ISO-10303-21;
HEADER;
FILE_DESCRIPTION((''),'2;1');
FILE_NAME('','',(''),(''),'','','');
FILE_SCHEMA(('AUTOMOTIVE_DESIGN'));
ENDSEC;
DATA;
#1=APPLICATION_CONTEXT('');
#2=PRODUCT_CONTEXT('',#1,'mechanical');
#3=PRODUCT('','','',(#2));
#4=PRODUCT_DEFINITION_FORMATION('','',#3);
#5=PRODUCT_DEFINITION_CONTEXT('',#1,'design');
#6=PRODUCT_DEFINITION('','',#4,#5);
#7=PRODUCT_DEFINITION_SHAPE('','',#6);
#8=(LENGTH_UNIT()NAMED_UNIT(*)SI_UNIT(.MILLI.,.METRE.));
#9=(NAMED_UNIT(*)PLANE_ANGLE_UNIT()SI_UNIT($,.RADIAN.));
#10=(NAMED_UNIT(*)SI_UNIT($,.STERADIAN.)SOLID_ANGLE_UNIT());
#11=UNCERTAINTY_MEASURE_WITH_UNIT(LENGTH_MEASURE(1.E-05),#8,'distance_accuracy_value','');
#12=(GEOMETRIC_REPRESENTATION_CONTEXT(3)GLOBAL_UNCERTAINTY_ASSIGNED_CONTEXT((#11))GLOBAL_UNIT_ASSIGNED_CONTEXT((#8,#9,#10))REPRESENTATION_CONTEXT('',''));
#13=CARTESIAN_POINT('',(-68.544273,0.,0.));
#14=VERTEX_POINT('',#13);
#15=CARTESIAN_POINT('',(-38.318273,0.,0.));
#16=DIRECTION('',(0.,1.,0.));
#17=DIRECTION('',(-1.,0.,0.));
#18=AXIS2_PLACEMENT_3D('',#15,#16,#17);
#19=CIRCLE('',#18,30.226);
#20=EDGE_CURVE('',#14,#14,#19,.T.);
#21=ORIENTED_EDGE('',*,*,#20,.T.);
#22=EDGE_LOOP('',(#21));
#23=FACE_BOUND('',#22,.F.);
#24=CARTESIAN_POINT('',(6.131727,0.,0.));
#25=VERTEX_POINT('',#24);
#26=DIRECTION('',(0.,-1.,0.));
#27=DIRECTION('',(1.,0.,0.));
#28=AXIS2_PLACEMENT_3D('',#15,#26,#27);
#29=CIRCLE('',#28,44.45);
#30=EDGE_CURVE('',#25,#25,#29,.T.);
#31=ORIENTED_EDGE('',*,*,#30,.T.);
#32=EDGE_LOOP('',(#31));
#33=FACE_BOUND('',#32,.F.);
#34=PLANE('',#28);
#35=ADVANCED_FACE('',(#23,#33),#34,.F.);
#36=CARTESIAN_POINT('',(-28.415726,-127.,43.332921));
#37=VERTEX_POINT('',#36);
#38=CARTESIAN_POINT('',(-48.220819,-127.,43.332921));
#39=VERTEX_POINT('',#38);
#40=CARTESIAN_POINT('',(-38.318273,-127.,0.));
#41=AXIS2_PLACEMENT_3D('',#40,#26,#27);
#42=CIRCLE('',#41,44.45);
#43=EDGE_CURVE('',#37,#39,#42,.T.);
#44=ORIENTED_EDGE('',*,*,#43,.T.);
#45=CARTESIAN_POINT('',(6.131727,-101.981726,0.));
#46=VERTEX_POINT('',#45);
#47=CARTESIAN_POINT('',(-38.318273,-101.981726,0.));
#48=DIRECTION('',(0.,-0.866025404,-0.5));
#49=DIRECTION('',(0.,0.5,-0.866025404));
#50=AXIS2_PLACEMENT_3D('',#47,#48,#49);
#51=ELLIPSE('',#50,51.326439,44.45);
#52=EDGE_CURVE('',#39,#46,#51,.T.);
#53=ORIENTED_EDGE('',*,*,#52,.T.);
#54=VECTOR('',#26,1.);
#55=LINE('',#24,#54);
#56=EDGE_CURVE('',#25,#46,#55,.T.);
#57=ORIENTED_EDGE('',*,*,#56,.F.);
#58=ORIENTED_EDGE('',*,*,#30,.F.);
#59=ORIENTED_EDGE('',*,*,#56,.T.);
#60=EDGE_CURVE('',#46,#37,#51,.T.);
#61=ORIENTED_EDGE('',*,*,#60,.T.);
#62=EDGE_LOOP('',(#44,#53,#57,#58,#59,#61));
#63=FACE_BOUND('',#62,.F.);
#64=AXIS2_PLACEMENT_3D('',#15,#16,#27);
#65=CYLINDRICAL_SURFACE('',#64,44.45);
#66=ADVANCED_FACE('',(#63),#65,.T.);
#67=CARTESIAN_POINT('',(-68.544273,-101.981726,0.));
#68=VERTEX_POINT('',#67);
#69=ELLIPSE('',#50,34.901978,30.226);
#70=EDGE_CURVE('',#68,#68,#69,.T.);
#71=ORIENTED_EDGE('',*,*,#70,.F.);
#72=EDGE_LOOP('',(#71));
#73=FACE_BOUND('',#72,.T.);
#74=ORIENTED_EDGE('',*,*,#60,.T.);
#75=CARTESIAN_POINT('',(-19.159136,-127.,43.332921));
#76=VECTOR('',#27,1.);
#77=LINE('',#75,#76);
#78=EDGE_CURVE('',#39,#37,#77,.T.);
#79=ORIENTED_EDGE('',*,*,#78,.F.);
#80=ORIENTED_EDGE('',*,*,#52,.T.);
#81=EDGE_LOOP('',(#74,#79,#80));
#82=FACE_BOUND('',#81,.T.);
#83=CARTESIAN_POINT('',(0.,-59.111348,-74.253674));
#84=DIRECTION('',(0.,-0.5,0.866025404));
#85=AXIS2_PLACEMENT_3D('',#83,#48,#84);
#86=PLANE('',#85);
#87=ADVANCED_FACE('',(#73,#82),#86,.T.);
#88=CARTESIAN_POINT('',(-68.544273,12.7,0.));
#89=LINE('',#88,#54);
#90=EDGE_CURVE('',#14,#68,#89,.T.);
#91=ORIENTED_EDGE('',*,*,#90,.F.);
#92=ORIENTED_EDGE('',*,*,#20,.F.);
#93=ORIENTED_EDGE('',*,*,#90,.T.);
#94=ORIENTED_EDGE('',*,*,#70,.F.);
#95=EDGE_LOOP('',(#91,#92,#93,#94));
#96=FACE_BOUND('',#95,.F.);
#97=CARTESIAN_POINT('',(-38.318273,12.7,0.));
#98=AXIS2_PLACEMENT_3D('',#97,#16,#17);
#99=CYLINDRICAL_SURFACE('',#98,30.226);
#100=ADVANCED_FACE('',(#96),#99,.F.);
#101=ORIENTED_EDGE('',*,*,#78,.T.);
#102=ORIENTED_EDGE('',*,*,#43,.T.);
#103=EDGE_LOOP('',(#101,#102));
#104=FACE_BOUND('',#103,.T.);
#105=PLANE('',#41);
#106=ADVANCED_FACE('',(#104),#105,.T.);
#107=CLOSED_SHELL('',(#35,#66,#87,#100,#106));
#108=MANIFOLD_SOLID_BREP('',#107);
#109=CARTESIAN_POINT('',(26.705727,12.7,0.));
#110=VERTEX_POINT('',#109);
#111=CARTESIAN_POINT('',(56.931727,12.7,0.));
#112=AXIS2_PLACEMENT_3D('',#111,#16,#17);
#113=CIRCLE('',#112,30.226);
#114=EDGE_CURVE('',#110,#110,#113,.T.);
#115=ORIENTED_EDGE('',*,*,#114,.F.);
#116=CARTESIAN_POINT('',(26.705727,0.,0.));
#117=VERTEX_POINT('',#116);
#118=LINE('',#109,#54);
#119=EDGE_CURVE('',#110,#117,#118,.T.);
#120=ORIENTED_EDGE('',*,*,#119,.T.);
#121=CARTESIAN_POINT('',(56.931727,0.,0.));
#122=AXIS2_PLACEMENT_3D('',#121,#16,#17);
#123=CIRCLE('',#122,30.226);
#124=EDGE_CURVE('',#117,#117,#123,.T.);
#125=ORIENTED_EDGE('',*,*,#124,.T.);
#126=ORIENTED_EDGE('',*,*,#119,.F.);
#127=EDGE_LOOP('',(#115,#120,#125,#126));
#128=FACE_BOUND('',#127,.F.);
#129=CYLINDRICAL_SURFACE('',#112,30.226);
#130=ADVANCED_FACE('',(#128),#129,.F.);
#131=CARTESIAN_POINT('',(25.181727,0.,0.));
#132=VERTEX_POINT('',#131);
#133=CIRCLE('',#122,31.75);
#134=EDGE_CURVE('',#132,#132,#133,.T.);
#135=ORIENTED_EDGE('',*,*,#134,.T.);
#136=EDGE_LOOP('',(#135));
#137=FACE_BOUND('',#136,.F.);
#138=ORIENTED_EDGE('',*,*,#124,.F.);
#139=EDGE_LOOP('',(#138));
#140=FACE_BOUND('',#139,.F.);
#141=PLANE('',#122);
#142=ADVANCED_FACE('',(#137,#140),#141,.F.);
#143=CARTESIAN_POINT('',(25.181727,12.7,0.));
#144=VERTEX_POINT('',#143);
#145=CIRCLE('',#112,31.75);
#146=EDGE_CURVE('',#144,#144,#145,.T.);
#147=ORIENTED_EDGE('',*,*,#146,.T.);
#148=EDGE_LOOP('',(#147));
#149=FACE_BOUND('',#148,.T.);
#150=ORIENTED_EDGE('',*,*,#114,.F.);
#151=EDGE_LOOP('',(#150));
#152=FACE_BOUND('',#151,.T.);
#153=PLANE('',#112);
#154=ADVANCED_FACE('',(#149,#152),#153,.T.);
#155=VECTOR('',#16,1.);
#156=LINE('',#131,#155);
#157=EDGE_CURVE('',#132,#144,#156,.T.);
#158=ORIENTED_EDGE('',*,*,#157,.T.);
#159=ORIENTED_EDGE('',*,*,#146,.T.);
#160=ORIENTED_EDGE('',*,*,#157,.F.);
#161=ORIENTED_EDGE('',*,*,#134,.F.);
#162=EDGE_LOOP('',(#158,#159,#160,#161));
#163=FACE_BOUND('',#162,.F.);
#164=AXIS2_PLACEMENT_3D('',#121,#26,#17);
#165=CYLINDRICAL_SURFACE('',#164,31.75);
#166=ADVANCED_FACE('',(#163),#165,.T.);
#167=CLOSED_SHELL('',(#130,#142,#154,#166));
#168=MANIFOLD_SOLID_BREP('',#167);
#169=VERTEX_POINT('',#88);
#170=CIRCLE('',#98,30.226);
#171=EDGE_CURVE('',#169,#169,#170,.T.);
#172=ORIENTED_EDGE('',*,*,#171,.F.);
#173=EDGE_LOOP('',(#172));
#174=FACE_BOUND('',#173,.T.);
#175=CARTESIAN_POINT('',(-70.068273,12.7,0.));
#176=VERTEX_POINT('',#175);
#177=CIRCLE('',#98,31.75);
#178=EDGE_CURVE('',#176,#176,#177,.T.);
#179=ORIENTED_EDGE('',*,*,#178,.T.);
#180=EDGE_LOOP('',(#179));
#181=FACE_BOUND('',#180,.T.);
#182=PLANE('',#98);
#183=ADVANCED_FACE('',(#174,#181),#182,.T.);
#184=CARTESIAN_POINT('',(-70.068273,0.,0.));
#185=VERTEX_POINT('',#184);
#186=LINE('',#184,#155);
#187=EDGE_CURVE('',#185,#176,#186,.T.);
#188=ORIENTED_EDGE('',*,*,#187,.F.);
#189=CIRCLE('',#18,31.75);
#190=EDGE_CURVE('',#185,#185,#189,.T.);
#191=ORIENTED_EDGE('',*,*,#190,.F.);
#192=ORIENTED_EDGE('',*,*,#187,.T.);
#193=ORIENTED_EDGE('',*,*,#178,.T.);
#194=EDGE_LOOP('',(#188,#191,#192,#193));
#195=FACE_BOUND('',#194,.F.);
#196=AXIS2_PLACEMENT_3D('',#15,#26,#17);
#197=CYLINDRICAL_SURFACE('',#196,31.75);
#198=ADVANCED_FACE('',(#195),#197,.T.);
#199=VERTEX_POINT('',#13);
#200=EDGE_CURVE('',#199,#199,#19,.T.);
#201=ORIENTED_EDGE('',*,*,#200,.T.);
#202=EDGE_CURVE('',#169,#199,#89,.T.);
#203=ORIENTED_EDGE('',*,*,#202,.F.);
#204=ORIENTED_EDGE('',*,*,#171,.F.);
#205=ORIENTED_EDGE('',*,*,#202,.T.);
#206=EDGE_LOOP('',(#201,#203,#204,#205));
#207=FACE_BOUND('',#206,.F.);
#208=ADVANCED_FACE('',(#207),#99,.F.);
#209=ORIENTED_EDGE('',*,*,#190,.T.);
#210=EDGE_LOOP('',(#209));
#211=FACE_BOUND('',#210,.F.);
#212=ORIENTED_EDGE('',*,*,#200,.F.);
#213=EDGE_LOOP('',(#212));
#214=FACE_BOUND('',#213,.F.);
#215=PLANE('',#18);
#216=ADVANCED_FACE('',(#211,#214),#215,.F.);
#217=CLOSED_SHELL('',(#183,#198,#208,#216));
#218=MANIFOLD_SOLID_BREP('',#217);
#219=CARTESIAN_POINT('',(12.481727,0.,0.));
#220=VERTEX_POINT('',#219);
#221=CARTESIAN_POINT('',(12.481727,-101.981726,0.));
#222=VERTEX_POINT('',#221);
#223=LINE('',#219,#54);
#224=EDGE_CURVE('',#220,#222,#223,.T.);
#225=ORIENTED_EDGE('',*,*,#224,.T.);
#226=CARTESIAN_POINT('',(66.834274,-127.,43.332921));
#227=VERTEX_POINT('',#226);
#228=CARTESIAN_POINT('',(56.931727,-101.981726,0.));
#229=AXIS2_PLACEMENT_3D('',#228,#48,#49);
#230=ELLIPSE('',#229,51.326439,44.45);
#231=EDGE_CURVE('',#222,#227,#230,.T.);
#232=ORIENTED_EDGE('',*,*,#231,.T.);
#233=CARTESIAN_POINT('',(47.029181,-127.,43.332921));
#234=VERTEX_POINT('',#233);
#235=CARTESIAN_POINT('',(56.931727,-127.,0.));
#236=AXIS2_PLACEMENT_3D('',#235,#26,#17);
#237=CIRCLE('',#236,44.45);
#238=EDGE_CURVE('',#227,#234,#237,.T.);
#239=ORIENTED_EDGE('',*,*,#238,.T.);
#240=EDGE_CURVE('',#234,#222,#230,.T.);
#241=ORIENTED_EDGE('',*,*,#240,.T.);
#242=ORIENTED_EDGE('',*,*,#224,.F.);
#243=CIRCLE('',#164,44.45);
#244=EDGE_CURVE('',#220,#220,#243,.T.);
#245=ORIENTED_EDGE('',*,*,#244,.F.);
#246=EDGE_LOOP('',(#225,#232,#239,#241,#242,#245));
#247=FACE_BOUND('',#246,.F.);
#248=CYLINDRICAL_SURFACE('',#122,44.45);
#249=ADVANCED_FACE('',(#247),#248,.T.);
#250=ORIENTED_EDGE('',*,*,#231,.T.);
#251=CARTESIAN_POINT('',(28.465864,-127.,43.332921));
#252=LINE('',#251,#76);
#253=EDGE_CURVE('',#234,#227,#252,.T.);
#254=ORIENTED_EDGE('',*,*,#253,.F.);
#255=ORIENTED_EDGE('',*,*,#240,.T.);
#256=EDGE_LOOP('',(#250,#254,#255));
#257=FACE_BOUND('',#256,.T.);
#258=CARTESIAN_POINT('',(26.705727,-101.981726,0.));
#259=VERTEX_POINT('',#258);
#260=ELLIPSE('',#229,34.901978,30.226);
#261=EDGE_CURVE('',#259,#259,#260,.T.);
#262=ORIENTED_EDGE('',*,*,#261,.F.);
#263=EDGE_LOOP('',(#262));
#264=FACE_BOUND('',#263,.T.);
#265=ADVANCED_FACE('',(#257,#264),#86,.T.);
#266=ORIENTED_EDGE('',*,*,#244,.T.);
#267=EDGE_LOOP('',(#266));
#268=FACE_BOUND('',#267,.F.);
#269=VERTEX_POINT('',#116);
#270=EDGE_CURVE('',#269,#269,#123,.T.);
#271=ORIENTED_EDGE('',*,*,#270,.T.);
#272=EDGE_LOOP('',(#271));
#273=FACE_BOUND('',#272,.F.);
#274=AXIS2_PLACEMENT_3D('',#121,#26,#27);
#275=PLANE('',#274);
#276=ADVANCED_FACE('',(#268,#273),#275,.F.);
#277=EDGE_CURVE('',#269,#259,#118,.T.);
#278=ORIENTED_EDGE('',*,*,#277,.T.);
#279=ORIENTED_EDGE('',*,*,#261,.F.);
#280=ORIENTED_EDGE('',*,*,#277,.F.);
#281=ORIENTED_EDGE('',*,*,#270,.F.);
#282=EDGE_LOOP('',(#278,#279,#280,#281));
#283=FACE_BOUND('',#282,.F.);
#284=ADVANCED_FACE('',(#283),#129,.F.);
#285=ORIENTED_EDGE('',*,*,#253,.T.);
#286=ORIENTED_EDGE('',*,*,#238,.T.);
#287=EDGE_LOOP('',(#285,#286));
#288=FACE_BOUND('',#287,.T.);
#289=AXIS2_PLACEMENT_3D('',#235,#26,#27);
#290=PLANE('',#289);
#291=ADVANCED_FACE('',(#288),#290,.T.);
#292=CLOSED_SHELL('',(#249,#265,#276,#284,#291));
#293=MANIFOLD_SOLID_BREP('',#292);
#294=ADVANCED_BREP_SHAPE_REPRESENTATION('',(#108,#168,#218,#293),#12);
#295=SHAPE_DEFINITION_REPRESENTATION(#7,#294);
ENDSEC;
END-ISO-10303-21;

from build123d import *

# Parameters (mm, degrees)
F0_R          = 44.45
F1_DEPTH      = 127
F2_R          = 31.75
F3_DEPTH      = 12.7
F4_R          = 30.226
F5_DEPTH      = 139.701
F7_DEPTH      = 82.76927268
F7_DEPTH_BACK = 101.38272732


with BuildPart() as f1:
    # F0 (on Front) → F1 (new body)
    with BuildSketch(Plane.XZ):
        with Locations((-38.31827268, 0)):
            Circle(F0_R)
    extrude(amount=F1_DEPTH)


with BuildPart() as f1b:
    # F0 (on Front) → F1, piece 2 (new body)
    with BuildSketch(Plane.XZ):
        with BuildLine():
            ThreePointArc((101.38172732, 0), (56.93172732, 44.45), (12.48172732, 0))
            ThreePointArc((12.48172732, 0), (56.93172732, -44.45), (101.38172732, 0))
        make_face()
    extrude(amount=F1_DEPTH)


with BuildPart() as f3:
    # F2 (on face) → F3 (new body)
    with BuildSketch(Plane(origin=(0, 0, 0), x_dir=(-1, 0, 0), z_dir=(0, 1, 0))):
        with Locations((38.31827268, 0)):
            Circle(F2_R)
    extrude(amount=F3_DEPTH)


with BuildPart() as f3b:
    # F2 (on face) → F3, piece 2 (new body)
    with BuildSketch(Plane(origin=(0, 0, 0), x_dir=(-1, 0, 0), z_dir=(0, 1, 0))):
        with Locations((-56.93172732, 0)):
            Circle(F2_R)
    extrude(amount=F3_DEPTH)


with BuildPart() as f5_tool:
    # F4 (on face) → F5 (new body, through all)
    with BuildSketch(Plane(origin=(0, 12.7, 0), x_dir=(-1, 0, 0), z_dir=(0, 1, 0))):
        with Locations((-56.93172732, 0)):
            Circle(F4_R)
        with Locations((38.31827268, 0)):
            Circle(F4_R)
    extrude(amount=-F5_DEPTH)


with BuildPart() as f1_1:
    add(f1.part)

    # F5: cut by f5_tool
    add(f5_tool.part, mode=Mode.SUBTRACT)


with BuildPart() as f1b_1:
    add(f1b.part)

    # F5: cut by f5_tool
    add(f5_tool.part, mode=Mode.SUBTRACT)


with BuildPart() as f3_1:
    add(f3.part)

    # F5: cut by f5_tool
    add(f5_tool.part, mode=Mode.SUBTRACT)


with BuildPart() as f3b_1:
    add(f3b.part)

    # F5: cut by f5_tool
    add(f5_tool.part, mode=Mode.SUBTRACT)


with BuildPart() as f7_tool:
    # F6 (on Right) → F7 (new body, two sides)
    with BuildSketch(Plane.YZ) as f7_sk:
        Polygon((-59.1113475329, -74.2536739212), (-133.0174654722, 53.7554773399), (-133.0174654722, -74.2536739212), align=None)
    extrude(amount=-F7_DEPTH)
    extrude(f7_sk.sketch, amount=F7_DEPTH_BACK)


with BuildPart() as f1_2:
    add(f1_1.part)

    # F7: cut by f7_tool
    add(f7_tool.part, mode=Mode.SUBTRACT)


with BuildPart() as f1b_2:
    add(f1b_1.part)

    # F7: cut by f7_tool
    add(f7_tool.part, mode=Mode.SUBTRACT)


solid = Compound([f3_1.part, f3b_1.part, f1_2.part, f1b_2.part])
